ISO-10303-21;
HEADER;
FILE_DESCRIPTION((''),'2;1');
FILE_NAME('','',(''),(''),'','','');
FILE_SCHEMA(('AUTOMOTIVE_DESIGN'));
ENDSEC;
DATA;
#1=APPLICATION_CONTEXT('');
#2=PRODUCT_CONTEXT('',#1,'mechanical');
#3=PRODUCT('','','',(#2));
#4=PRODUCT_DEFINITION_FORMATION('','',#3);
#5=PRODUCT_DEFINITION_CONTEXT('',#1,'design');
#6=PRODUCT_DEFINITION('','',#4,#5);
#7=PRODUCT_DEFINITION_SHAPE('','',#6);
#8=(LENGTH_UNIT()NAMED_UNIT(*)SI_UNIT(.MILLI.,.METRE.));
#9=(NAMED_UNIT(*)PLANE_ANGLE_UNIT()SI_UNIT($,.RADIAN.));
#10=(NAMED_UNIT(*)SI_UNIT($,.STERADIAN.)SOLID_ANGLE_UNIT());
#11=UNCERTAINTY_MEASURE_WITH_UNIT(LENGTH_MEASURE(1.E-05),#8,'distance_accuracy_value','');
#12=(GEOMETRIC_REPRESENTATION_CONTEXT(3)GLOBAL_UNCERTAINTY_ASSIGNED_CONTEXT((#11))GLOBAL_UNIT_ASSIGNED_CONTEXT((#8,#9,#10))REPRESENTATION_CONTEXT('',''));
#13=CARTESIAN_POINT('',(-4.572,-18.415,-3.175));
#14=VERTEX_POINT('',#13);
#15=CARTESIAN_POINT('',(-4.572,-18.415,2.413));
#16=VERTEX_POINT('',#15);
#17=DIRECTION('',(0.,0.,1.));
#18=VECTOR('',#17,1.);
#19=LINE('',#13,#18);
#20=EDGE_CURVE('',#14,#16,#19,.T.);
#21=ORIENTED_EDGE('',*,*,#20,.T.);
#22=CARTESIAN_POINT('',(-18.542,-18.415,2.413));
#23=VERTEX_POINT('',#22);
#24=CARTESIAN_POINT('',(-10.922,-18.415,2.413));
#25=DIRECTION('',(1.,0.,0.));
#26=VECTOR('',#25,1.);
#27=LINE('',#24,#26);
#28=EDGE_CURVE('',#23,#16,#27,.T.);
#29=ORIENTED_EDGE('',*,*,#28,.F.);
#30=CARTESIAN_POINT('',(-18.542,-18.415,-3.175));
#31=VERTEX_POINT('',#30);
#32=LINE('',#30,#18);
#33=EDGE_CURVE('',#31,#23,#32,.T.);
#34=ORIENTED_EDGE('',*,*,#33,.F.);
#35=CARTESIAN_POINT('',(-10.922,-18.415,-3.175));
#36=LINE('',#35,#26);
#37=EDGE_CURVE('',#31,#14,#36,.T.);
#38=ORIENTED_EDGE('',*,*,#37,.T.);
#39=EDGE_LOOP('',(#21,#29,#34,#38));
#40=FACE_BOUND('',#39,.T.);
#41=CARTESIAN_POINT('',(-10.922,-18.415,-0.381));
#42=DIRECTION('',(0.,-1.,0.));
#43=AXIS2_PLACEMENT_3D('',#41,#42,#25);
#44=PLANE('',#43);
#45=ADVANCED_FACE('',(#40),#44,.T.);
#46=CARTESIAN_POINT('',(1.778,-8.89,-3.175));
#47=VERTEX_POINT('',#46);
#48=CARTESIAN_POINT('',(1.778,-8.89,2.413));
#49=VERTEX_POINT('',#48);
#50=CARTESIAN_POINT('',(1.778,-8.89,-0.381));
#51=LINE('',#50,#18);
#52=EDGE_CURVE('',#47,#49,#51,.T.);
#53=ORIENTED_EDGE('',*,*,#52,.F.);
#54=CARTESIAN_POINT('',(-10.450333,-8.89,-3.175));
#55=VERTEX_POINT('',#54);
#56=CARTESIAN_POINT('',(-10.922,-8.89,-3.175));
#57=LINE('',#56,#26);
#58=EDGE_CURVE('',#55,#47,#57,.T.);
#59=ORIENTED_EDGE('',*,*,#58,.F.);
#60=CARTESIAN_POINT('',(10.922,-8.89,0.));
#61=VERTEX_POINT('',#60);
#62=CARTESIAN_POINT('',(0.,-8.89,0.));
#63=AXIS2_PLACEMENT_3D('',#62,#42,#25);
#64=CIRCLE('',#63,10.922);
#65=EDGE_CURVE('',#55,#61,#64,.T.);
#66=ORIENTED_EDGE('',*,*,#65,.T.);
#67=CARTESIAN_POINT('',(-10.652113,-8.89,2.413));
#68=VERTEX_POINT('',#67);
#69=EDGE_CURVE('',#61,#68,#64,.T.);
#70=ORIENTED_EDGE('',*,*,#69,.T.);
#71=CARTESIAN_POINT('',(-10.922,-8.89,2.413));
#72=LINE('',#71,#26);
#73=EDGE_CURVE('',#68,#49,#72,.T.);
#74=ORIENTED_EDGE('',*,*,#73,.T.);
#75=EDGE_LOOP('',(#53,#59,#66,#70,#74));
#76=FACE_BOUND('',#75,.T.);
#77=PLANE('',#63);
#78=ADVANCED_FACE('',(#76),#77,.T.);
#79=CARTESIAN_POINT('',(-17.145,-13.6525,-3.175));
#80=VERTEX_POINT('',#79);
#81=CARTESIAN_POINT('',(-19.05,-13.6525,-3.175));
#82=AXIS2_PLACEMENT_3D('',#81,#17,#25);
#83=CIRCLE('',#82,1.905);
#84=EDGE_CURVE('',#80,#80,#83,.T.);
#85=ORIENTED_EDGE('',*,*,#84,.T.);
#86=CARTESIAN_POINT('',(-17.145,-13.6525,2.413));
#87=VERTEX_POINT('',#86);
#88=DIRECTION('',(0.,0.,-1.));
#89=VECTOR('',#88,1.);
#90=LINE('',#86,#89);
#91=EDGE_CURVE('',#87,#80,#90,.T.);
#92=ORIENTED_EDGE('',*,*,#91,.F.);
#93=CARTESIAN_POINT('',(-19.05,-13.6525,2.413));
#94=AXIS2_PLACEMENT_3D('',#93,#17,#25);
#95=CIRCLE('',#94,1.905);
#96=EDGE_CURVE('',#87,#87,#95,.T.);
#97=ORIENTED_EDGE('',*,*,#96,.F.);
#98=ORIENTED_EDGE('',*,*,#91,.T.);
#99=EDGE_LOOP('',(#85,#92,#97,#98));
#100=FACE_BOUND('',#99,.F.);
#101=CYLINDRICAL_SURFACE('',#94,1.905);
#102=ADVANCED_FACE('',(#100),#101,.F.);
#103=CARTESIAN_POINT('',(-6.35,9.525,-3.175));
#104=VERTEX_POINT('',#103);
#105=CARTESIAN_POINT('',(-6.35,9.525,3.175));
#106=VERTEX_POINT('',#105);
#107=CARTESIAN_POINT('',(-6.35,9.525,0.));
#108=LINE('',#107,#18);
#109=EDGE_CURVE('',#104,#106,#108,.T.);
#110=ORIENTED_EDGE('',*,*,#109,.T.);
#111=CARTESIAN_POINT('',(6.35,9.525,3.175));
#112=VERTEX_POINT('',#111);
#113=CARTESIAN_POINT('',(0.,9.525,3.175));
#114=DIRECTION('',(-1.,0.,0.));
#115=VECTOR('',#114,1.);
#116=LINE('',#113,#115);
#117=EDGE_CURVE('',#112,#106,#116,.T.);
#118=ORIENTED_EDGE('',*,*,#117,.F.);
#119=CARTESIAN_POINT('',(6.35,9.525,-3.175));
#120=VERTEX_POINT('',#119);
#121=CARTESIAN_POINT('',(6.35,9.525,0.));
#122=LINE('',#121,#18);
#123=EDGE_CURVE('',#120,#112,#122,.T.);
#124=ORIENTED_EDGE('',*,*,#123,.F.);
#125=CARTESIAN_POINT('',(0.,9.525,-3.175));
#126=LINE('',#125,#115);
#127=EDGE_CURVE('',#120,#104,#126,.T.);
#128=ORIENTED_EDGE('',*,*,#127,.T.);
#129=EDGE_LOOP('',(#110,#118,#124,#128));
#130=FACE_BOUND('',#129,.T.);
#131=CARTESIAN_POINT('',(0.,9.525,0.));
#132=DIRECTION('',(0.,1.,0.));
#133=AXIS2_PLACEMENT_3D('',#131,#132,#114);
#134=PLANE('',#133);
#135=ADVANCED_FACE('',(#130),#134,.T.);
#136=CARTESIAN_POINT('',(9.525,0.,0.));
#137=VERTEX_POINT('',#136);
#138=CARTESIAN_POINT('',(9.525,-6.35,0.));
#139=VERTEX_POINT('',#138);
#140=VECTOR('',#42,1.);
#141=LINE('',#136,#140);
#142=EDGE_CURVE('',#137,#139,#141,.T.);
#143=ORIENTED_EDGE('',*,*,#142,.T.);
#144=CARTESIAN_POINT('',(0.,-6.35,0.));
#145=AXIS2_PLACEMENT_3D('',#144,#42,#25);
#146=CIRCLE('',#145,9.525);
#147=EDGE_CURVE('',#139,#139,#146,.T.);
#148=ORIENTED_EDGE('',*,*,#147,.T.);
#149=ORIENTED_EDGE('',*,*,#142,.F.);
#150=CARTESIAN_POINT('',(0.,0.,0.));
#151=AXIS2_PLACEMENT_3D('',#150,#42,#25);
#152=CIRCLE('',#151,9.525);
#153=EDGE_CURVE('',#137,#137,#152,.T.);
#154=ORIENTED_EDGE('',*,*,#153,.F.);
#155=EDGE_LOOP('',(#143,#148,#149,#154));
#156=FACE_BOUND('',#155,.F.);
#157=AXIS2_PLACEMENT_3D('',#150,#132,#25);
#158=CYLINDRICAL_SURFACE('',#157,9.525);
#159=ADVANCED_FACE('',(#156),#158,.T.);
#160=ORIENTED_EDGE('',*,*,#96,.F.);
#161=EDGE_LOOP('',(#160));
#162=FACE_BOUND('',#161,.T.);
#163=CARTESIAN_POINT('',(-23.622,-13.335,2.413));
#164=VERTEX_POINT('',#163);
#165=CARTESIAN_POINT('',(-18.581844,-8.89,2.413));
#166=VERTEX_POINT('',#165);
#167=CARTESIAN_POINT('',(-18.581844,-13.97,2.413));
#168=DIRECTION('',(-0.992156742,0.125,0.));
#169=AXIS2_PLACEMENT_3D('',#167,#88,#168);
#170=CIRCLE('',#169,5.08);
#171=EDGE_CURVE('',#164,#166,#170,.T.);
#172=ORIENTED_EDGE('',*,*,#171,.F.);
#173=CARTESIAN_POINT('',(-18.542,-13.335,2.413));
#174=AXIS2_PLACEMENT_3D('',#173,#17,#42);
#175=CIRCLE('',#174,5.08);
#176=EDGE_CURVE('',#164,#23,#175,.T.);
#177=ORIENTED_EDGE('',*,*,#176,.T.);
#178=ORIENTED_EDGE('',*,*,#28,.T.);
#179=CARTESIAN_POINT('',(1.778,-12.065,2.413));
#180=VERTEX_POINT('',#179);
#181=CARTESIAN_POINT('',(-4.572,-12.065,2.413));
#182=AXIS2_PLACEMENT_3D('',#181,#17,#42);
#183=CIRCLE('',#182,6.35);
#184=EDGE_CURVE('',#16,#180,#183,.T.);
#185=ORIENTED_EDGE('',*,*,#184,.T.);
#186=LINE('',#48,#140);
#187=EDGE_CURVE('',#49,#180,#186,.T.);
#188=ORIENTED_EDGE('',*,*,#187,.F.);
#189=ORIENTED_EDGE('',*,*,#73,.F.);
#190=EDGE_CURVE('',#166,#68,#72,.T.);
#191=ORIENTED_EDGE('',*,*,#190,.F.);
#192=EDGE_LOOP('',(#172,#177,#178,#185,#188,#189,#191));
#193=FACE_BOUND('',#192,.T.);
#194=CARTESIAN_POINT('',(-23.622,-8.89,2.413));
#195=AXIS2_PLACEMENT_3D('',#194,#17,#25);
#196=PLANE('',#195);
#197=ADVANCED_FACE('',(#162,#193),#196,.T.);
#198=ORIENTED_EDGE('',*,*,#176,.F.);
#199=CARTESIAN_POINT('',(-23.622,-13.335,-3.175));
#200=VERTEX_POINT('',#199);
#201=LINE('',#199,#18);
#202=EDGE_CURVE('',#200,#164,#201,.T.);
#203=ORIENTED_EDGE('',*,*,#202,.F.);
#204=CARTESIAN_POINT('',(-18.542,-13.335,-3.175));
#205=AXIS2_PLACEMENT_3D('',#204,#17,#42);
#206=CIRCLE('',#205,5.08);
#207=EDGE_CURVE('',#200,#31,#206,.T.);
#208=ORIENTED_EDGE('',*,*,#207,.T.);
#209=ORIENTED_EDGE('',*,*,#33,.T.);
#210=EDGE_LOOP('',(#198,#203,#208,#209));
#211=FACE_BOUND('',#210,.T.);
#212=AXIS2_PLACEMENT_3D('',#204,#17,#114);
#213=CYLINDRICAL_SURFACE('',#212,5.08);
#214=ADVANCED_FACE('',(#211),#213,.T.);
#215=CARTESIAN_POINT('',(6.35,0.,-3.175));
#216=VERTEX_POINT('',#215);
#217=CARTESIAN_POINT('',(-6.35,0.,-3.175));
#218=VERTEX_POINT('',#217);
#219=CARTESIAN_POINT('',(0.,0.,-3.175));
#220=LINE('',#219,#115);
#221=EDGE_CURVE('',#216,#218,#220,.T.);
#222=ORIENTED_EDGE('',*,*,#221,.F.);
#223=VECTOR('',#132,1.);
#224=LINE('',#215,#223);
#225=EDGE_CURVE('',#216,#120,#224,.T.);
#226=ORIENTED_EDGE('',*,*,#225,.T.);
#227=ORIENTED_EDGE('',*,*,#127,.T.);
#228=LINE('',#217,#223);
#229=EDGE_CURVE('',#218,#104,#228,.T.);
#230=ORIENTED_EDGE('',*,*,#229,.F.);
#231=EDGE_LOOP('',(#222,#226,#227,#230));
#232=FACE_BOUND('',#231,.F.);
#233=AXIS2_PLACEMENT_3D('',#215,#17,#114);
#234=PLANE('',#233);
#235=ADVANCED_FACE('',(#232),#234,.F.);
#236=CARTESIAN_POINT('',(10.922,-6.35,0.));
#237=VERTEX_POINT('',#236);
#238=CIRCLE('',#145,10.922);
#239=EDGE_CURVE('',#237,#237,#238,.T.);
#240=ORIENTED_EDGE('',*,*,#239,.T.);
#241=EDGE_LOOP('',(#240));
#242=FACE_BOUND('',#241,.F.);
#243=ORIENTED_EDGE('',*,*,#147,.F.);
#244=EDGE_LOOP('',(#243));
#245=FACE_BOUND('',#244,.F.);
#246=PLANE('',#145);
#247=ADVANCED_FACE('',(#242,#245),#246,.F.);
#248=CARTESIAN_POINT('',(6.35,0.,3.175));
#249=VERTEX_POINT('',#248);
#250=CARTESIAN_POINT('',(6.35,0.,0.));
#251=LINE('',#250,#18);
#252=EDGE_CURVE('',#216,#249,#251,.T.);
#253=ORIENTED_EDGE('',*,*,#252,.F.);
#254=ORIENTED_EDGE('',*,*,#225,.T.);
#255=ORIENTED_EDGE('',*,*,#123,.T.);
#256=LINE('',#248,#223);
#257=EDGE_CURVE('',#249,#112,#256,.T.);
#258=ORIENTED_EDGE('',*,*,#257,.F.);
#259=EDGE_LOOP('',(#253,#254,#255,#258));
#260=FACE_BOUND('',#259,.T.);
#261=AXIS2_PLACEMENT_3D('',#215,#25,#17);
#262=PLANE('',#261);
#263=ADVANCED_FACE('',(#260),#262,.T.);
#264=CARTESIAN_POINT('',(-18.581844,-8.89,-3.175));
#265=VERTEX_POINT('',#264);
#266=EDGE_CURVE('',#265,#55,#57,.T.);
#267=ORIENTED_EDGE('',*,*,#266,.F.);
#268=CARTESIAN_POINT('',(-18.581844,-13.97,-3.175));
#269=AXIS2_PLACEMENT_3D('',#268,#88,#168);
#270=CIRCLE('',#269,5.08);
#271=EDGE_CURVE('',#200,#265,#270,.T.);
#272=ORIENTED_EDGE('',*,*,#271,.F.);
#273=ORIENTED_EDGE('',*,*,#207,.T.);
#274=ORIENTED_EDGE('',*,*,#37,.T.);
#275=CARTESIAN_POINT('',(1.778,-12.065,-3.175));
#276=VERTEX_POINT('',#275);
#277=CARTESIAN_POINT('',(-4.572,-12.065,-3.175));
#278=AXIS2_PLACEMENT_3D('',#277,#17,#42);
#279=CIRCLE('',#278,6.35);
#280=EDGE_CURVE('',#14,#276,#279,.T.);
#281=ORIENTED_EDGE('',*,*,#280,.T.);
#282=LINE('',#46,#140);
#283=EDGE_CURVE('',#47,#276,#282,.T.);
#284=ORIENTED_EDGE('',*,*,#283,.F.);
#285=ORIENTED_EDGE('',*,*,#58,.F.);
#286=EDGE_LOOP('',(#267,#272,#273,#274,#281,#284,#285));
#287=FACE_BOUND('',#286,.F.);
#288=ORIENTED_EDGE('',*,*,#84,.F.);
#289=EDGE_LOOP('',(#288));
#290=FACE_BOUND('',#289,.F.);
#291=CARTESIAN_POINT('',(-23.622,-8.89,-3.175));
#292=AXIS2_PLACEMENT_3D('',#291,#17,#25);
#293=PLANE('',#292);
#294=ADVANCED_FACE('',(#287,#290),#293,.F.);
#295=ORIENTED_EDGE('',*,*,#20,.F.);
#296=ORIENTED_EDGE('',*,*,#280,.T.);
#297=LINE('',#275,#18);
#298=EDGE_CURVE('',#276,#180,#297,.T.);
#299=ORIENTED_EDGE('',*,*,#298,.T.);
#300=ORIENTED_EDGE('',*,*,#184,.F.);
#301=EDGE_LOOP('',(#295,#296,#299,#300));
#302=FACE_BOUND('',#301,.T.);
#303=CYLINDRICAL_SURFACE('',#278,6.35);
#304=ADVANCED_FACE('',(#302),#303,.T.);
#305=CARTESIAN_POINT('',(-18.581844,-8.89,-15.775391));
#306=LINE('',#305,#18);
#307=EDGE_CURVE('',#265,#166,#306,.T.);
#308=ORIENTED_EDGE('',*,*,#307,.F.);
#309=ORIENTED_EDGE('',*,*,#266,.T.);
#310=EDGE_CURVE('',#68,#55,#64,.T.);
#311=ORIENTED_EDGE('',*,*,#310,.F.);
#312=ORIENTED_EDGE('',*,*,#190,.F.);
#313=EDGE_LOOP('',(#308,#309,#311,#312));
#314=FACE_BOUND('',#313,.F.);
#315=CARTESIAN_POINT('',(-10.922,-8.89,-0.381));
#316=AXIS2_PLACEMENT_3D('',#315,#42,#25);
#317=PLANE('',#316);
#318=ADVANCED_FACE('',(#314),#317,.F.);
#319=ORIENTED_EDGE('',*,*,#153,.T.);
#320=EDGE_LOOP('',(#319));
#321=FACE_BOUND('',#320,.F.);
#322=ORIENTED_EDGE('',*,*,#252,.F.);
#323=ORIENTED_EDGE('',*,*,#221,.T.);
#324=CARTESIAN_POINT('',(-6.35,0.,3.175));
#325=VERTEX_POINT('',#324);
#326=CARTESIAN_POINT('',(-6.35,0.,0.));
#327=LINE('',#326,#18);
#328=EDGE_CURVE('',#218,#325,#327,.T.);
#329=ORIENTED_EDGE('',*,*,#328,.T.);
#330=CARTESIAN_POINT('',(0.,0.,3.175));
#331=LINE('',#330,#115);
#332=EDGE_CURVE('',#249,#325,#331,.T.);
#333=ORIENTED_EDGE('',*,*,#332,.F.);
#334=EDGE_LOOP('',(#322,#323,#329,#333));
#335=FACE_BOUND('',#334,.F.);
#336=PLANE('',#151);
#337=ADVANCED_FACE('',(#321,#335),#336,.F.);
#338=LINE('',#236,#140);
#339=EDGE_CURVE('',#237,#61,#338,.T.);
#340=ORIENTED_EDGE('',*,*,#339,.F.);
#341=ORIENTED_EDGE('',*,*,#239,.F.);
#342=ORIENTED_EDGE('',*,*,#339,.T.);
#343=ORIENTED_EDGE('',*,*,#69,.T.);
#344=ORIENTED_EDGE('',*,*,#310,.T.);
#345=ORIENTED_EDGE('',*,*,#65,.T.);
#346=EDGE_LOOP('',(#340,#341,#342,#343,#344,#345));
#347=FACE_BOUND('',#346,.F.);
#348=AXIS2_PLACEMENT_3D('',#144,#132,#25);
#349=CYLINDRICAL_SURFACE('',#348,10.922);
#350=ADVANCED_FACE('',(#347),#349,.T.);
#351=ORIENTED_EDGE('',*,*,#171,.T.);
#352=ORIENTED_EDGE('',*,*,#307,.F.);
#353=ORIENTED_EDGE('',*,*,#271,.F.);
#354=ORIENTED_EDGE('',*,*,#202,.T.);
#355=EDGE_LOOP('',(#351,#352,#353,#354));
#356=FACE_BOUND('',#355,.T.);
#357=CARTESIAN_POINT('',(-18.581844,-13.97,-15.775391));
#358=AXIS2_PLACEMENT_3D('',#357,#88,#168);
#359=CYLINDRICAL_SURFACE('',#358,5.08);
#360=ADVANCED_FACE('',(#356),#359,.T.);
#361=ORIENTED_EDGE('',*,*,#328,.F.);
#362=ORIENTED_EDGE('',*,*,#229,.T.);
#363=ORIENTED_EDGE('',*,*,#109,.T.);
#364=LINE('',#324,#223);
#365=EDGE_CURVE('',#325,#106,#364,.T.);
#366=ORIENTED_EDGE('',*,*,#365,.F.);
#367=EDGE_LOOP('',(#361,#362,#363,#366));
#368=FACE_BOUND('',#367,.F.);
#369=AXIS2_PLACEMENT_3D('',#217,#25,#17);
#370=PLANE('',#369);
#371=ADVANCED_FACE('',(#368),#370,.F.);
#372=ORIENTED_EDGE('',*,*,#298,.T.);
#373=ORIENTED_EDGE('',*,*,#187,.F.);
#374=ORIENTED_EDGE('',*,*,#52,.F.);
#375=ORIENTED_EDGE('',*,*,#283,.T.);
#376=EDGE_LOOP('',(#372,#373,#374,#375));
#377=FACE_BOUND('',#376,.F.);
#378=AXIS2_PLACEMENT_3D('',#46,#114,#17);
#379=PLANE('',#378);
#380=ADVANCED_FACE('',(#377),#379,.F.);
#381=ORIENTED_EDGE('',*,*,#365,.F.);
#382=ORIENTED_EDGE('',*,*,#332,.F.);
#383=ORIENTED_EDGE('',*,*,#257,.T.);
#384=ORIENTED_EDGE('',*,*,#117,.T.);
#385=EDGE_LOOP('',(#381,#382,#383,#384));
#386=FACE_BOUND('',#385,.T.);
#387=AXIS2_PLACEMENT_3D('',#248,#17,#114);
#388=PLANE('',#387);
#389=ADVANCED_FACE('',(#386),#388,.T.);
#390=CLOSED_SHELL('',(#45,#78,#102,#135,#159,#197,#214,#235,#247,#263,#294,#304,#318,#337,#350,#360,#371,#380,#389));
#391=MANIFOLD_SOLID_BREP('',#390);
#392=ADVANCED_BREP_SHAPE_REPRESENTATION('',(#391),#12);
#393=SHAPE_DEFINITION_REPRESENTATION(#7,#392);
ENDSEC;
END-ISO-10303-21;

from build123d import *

# Parameters (mm, degrees)
F0_R        = 9.525
F1_DEPTH    = 6.35
F2_W        = 12.7
F2_H        = 6.35
F3_DEPTH    = 9.525
F4_R        = 10.922
F5_DEPTH    = 2.54
F6_W        = 25.4
F6_H        = 5.588
F7_DEPTH    = 9.525
F8_R        = 5.08
F9_T1_DEPTH = 30.7887812379
F10_R       = 6.35
F11_R       = 1.905
F12_DEPTH   = 13.336


# Not quite as in the source:
# - a fillet or chamfer that OpenCascade refuses, or shapes differently, is made with other operations: its cross-section is extruded or revolved along the edge and cut away or added


with BuildPart() as f1:
    # F0 (on Front) → F1 (new body)
    with BuildSketch(Plane.XZ):
        Circle(F0_R)
    extrude(amount=F1_DEPTH)

    # F2 (on face) → F3 (join)
    with BuildSketch(Plane(origin=(0, 0, 0), x_dir=(-1, 0, 0), z_dir=(0, 1, 0))):
        Rectangle(F2_W, F2_H)
    extrude(amount=F3_DEPTH)

    # F4 (on face) → F5 (join)
    with BuildSketch(Plane.XZ.offset(6.35)):
        Circle(F4_R)
    extrude(amount=F5_DEPTH)

    # F6 (on face) → F7 (join)
    with BuildSketch(Plane.XZ.offset(8.89)):
        with Locations((-10.922, -0.381)):
            Rectangle(F6_W, F6_H)
    extrude(amount=F7_DEPTH)

    # F8
    f8_edges = [f1.edges().sort_by_distance(p)[0] for p in [
        (-23.622, -18.415, -0.381),
    ]]
    fillet(f8_edges, radius=F8_R)

    # F9: fillet of radius 5.08 on 1 edges, made by hand

    # F9_s2 → F9_t1 (cut)
    with BuildSketch(Plane.XY.offset(-15.7753906189)):
        with BuildLine():
            ThreePointArc((-23.622, -13.335), (-21.9419479175, -10.16), (-18.5818437524, -8.89))
            Line((-18.5818437524, -8.89), (-23.622, -8.89))
            Line((-23.622, -8.89), (-23.622, -13.335))
        make_face()
    extrude(amount=F9_T1_DEPTH, mode=Mode.SUBTRACT)

    # F10
    f10_edges = [f1.edges().sort_by_distance(p)[0] for p in [
        (1.778, -18.415, -0.381),
    ]]
    fillet(f10_edges, radius=F10_R)

    # F11 (on face) → F12 (cut, through all)
    with BuildSketch(Plane.XY.offset(2.413)):
        with Locations((-19.05, -13.6525)):
            Circle(F11_R)
    extrude(amount=-F12_DEPTH, mode=Mode.SUBTRACT)


solid = f1.part
